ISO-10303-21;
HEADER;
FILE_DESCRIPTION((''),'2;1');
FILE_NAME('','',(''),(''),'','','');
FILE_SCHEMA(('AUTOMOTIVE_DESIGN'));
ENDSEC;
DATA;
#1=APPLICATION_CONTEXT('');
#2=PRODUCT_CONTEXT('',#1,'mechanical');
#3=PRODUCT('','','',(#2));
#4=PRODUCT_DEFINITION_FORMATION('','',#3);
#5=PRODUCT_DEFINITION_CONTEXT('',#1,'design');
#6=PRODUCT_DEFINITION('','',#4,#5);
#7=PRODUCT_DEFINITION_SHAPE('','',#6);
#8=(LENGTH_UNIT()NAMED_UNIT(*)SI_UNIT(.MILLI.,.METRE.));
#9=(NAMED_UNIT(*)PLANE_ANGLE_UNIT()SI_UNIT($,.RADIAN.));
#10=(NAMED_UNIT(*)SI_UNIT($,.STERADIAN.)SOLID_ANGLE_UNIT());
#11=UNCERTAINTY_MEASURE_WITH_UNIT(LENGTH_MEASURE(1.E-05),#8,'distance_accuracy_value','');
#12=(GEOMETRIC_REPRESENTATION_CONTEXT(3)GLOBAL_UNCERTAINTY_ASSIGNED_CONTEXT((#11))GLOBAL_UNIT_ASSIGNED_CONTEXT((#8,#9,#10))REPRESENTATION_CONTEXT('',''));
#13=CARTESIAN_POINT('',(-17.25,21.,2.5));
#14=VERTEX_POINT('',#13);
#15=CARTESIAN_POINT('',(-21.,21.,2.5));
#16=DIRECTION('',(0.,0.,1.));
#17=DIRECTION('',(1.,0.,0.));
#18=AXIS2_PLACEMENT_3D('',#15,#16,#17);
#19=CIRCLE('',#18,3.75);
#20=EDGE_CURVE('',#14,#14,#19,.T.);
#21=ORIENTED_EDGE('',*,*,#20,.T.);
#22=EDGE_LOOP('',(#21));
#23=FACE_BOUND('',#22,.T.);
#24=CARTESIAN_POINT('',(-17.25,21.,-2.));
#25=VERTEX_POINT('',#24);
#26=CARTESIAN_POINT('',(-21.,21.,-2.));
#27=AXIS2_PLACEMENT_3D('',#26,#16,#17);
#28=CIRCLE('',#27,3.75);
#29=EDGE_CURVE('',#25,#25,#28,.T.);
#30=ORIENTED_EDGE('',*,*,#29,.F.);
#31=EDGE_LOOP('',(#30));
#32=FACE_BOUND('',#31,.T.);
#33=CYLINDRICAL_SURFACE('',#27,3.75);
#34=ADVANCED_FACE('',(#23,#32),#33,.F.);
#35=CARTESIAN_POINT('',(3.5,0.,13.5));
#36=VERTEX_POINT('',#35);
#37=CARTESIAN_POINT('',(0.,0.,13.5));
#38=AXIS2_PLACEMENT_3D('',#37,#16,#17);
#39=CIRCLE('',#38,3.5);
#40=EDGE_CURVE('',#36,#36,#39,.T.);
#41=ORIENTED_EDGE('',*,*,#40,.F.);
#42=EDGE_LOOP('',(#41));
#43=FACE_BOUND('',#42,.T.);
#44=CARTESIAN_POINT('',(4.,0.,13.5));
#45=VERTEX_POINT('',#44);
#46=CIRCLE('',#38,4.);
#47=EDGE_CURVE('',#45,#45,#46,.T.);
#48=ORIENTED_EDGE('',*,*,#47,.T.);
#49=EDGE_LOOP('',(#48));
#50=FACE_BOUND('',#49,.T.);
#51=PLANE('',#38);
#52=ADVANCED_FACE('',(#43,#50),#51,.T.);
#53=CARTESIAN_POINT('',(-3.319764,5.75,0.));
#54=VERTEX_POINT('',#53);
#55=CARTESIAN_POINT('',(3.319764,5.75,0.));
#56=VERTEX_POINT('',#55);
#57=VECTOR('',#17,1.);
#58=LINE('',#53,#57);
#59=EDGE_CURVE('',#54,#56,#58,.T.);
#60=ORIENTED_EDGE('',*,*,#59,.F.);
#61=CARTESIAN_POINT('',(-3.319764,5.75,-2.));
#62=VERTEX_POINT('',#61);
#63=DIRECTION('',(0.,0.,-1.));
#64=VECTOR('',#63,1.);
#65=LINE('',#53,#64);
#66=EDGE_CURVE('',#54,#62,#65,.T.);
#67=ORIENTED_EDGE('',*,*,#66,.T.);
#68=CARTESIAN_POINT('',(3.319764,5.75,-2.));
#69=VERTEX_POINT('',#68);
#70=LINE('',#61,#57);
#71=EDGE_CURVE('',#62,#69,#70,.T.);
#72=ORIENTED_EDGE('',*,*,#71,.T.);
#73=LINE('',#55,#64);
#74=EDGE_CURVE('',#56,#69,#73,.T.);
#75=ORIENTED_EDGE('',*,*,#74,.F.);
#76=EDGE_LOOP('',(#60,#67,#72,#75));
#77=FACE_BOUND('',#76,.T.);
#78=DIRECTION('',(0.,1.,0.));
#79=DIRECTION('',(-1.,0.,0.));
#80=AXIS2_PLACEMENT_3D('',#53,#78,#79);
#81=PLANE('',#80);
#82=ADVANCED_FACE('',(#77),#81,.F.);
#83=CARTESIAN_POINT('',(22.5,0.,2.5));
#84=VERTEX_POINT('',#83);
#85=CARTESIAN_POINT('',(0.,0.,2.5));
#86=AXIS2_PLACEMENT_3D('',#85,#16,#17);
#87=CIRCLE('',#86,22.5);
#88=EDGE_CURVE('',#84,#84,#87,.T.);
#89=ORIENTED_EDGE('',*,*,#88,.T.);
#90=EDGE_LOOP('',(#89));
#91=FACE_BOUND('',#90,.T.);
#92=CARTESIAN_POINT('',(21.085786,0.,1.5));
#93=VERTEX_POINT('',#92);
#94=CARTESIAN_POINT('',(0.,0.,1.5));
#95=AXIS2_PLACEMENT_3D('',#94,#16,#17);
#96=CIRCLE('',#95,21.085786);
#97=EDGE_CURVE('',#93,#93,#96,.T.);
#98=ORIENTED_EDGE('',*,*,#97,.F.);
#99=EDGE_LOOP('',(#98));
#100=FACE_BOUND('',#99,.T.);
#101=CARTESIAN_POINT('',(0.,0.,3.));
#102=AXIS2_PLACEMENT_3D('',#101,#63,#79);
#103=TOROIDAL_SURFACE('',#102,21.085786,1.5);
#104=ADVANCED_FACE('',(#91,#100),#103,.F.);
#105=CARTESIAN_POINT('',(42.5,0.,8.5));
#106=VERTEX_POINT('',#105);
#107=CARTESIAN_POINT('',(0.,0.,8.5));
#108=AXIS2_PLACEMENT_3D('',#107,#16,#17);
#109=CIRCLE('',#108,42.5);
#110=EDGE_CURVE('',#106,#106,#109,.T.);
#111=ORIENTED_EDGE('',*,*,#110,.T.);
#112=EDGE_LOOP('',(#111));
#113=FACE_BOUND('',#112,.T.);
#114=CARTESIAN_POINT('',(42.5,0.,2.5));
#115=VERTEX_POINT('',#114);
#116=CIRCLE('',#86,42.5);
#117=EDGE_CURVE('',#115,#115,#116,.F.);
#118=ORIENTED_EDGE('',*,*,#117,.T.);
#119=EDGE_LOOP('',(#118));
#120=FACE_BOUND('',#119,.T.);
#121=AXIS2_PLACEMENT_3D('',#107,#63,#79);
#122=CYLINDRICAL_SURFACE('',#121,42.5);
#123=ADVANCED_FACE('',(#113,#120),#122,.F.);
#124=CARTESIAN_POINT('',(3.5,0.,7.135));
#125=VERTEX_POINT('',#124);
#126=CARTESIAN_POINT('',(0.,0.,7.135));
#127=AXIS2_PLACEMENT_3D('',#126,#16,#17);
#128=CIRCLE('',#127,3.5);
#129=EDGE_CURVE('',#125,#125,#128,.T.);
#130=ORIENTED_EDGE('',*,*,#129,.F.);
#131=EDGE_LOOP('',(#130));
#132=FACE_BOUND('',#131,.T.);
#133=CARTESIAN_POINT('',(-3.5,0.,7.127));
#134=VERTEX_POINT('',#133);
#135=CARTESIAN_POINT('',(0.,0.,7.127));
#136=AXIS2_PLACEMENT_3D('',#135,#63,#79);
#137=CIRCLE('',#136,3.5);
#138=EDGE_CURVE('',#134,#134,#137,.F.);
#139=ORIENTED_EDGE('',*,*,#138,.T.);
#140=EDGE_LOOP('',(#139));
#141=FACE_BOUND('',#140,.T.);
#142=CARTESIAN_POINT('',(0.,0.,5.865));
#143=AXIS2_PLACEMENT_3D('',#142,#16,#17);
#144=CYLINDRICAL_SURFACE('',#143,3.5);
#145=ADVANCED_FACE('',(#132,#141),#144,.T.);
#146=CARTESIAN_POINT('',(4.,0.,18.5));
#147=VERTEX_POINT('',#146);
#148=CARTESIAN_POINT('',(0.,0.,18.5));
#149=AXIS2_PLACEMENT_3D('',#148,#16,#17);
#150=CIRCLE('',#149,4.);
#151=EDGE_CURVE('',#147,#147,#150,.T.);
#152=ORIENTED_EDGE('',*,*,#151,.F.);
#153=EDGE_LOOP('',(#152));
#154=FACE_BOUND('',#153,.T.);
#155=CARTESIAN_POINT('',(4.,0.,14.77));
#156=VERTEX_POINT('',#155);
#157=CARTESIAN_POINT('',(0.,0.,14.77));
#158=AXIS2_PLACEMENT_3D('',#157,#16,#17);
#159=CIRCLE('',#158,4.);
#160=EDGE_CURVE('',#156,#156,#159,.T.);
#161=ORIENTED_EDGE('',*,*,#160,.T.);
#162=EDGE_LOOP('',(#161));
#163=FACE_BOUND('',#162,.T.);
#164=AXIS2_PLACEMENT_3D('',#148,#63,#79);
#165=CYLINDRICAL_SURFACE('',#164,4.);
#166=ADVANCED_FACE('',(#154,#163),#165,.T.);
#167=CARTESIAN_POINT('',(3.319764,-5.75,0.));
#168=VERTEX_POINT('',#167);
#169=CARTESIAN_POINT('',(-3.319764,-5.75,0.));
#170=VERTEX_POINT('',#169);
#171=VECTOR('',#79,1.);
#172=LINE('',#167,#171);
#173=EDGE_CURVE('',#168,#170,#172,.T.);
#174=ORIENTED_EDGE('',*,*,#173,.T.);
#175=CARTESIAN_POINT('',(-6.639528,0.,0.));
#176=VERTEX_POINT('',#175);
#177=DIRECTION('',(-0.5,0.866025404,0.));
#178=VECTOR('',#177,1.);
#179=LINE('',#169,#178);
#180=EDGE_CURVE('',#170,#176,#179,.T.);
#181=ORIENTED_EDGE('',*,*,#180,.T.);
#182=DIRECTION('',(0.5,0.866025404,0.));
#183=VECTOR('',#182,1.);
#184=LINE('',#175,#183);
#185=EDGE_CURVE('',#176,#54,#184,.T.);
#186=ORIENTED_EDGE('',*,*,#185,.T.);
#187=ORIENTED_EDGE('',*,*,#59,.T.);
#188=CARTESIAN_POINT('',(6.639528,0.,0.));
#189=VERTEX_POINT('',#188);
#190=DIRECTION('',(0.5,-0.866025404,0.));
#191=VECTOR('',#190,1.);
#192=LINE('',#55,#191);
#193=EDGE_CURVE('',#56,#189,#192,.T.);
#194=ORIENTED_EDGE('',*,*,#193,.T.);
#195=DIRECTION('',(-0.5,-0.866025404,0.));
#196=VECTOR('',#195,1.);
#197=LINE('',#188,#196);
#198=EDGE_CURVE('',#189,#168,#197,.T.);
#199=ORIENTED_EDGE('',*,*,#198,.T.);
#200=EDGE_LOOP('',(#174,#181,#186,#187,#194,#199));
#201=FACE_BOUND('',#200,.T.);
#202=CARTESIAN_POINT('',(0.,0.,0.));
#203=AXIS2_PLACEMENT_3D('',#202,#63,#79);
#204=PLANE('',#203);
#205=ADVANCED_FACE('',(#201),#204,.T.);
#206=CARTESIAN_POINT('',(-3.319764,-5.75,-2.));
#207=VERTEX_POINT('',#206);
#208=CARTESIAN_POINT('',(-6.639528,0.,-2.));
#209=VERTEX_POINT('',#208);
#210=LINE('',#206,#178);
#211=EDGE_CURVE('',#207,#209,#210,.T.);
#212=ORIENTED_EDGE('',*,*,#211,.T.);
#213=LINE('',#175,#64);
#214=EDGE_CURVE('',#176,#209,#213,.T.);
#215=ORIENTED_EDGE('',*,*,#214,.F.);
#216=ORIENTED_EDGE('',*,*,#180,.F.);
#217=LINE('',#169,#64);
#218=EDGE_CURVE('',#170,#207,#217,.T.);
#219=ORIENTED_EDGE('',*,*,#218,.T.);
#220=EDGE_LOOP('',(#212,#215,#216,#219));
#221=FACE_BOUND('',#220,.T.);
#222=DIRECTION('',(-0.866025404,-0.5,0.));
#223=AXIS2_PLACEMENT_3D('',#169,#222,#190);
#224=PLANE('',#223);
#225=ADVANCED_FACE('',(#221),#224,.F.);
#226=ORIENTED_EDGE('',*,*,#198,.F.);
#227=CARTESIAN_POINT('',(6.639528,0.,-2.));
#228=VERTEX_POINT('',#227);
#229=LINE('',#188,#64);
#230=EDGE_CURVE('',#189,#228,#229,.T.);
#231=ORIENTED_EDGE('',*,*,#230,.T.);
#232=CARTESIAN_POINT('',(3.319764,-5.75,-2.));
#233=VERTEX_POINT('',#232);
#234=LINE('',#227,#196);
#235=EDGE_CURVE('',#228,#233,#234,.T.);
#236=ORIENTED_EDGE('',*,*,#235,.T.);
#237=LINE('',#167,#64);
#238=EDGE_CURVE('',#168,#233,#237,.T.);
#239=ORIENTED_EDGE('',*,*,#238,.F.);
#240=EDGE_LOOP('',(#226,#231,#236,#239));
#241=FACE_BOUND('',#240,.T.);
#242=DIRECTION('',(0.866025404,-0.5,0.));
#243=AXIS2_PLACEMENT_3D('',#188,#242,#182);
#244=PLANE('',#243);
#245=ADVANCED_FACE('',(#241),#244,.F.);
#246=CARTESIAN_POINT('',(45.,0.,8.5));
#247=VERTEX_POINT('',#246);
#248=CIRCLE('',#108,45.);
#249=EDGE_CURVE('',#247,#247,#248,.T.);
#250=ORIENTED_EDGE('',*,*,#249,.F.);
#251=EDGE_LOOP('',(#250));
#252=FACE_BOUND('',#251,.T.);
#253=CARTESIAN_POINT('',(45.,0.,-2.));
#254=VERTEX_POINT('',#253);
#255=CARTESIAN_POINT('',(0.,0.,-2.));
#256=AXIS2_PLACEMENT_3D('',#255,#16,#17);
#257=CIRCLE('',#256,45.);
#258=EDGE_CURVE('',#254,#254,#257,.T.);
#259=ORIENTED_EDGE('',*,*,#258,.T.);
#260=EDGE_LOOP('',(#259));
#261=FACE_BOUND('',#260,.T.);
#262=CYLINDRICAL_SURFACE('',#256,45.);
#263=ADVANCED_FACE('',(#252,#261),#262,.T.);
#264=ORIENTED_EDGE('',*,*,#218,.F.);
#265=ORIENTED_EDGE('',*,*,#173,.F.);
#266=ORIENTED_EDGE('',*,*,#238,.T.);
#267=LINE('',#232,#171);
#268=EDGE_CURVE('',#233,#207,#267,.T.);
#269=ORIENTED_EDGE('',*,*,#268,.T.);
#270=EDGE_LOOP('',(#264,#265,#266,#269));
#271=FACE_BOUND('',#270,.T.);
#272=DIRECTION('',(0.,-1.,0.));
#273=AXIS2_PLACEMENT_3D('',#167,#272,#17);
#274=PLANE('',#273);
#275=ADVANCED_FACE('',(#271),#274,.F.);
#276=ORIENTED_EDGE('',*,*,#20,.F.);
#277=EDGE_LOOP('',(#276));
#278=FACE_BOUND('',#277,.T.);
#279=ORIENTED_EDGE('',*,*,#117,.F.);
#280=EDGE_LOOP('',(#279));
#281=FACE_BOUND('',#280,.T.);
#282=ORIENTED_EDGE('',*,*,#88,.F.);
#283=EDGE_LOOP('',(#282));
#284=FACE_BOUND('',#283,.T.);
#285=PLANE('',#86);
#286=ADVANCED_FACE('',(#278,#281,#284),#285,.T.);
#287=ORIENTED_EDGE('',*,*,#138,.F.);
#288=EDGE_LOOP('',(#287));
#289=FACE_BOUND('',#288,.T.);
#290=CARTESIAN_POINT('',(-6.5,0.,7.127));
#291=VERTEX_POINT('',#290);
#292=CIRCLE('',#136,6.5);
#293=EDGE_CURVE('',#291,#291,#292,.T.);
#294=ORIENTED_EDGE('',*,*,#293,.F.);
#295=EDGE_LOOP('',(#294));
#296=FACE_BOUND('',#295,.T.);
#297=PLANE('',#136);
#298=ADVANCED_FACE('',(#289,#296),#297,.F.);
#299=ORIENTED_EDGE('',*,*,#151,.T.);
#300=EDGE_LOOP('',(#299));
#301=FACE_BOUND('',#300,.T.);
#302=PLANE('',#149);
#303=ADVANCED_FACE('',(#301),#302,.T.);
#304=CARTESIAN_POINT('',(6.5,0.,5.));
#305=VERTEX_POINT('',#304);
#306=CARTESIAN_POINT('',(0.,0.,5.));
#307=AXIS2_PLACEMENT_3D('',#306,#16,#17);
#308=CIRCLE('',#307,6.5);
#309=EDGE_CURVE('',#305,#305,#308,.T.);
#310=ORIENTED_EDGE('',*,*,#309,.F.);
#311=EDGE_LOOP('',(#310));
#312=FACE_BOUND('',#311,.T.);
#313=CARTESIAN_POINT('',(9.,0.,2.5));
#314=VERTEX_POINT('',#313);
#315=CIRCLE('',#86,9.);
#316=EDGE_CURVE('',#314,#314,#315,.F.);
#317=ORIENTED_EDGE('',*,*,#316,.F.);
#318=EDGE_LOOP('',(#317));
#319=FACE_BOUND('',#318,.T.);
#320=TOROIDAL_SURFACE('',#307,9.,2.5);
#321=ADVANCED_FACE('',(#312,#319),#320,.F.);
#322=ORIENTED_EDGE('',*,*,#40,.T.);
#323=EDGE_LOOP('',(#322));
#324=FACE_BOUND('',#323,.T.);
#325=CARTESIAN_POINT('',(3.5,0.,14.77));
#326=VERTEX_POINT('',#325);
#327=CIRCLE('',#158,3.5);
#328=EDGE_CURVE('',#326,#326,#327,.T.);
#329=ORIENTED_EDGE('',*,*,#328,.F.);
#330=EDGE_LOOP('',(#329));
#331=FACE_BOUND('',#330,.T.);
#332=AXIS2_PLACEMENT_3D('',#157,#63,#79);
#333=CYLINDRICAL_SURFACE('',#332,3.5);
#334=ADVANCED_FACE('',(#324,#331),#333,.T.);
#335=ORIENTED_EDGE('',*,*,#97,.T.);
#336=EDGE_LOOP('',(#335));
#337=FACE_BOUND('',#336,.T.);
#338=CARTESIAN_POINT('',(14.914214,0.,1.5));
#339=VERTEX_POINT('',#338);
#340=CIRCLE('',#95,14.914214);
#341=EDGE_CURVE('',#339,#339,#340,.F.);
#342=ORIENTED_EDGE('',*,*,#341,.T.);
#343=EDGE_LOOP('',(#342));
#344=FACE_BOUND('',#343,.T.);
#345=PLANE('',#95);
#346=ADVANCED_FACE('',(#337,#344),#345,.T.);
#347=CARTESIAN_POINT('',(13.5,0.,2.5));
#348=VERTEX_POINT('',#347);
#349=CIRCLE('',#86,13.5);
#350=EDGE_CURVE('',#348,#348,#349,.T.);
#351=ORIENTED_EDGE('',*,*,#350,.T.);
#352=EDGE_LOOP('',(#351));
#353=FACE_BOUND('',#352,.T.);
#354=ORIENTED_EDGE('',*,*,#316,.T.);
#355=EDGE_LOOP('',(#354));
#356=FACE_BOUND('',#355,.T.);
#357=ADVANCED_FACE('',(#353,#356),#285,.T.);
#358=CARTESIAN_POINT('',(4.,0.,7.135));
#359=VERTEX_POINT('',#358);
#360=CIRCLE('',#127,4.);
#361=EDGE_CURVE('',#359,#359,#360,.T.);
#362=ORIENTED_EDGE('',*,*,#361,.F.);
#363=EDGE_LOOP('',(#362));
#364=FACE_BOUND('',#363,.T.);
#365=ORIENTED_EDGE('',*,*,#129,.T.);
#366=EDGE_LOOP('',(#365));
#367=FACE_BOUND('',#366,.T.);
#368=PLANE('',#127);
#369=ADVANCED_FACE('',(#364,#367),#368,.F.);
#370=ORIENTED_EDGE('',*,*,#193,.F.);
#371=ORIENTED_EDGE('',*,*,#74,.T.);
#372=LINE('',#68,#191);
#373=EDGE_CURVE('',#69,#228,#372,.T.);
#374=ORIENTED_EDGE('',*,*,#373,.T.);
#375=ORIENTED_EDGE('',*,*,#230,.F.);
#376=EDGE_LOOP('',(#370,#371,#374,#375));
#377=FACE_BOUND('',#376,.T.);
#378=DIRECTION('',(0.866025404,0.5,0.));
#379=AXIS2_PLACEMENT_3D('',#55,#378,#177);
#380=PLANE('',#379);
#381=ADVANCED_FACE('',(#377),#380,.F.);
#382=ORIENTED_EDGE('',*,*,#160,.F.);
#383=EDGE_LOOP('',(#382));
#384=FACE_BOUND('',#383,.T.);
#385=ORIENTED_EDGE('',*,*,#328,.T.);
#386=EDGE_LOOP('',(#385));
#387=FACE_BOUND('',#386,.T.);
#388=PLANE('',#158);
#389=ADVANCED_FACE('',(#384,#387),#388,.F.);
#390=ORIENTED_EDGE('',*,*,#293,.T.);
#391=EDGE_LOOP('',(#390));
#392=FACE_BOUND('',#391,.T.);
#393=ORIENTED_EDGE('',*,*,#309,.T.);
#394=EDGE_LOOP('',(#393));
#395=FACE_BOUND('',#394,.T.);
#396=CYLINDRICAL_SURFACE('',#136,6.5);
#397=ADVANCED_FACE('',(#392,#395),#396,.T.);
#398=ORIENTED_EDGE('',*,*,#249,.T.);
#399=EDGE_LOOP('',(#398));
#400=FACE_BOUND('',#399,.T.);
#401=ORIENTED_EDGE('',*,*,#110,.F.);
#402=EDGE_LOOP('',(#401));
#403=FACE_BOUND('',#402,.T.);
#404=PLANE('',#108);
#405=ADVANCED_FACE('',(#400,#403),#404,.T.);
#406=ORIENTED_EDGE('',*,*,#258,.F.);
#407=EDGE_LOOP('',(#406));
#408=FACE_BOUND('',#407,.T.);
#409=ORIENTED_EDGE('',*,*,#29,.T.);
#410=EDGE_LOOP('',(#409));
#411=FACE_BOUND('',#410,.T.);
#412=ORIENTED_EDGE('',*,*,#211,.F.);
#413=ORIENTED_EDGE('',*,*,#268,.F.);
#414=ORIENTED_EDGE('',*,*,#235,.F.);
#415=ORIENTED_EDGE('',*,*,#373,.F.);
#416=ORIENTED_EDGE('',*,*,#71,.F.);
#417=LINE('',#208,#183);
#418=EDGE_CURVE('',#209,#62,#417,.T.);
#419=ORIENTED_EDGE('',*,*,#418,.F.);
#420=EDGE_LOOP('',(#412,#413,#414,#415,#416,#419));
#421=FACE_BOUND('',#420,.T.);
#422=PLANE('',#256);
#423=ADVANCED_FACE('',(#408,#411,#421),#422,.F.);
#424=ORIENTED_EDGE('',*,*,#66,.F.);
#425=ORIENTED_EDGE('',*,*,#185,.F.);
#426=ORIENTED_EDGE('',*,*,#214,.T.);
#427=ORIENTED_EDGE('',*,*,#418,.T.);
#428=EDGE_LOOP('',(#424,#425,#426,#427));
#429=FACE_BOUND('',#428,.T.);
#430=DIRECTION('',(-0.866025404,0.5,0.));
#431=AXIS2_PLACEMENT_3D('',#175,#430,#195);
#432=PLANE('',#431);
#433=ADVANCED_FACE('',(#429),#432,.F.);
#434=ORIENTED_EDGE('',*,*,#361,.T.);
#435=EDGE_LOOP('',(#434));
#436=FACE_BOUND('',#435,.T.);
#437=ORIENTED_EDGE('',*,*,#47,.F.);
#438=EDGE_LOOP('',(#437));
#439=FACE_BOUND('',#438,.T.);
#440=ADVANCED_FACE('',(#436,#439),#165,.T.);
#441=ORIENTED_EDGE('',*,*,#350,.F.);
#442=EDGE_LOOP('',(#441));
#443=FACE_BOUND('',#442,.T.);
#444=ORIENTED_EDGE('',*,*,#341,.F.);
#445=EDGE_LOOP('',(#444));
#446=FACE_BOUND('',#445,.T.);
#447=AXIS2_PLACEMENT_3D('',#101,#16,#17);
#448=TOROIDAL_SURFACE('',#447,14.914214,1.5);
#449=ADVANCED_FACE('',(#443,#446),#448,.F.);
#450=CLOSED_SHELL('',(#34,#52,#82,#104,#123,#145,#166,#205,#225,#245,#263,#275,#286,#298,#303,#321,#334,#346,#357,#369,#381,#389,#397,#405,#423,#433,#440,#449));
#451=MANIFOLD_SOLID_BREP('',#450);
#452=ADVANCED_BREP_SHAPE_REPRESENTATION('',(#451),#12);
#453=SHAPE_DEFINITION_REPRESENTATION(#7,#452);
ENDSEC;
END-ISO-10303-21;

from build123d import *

# Parameters (mm, degrees)
BOSS_EXTRUDE1_DEPTH      = 2.5
BOSS_EXTRUDE1_DEPTH_BACK = 2
SKETCH1_R                = 45
SKETCH2_R                = 45
SKETCH2_R_2              = 42.5
BOSS_EXTRUDE2_DEPTH      = 6
SKETCH3_R                = 4
BOSS_EXTRUDE3_DEPTH      = 16
SKETCH4_R                = 4
SKETCH4_R_2              = 3.5
CUT_EXTRUDE1_DEPTH       = 1.27
CUT_EXTRUDE2_START       = -1.27
SKETCH5_R                = 4
SKETCH5_R_2              = 3.5
CUT_EXTRUDE2_DEPTH       = 1.27
CUT_EXTRUDE3_DEPTH       = 2
SKETCH7_R                = 3.75
CUT_EXTRUDE4_DEPTH       = 66.620118866
SKETCH8_R                = 22.5
SKETCH8_R_2              = 13.5
CUT_EXTRUDE5_DEPTH       = 1
FILLET2_R                = 1.5
SKETCH11_R               = 6.5
BOSS_EXTRUDE4_DEPTH      = 7.127
FILLET3_R                = 2.5


with BuildPart() as part:
    # Sketch1 → Boss-Extrude1 (new, two sides: drawn at the far end of the back side and taken through both)
    with BuildSketch(Plane.XY.offset(-BOSS_EXTRUDE1_DEPTH_BACK)):
        Circle(SKETCH1_R)
    extrude(amount=BOSS_EXTRUDE1_DEPTH + BOSS_EXTRUDE1_DEPTH_BACK)

    # Sketch2 → Boss-Extrude2 (add)
    with BuildSketch(Plane.XY.offset(2.5)):
        Circle(SKETCH2_R)
        Circle(SKETCH2_R_2, mode=Mode.SUBTRACT)
    extrude(amount=BOSS_EXTRUDE2_DEPTH)

    # Sketch3 → Boss-Extrude3 (add)
    with BuildSketch(Plane.XY.offset(2.5)):
        Circle(SKETCH3_R)
    extrude(amount=BOSS_EXTRUDE3_DEPTH)

    # Sketch4 → Cut-Extrude1 (cut)
    with BuildSketch(Plane.XY.offset(13.5)):
        Circle(SKETCH4_R)
        Circle(SKETCH4_R_2, mode=Mode.SUBTRACT)
    extrude(amount=CUT_EXTRUDE1_DEPTH, mode=Mode.SUBTRACT)

    # Sketch5 → Cut-Extrude2 (cut)
    with BuildSketch(Plane.XY.offset(7.135).offset(CUT_EXTRUDE2_START)):
        Circle(SKETCH5_R)
        Circle(SKETCH5_R_2, mode=Mode.SUBTRACT)
    extrude(amount=CUT_EXTRUDE2_DEPTH, mode=Mode.SUBTRACT)

    # Sketch6 → Cut-Extrude3 (cut)
    with BuildSketch(Plane(origin=(0, 0, -2), x_dir=(-1, 0, 0), z_dir=(0, 0, -1))):
        Polygon((-6.639528096, 0), (-3.319764048, -5.75), (3.319764048, -5.75), (6.639528096, 0), (3.319764048, 5.75), (-3.319764048, 5.75), align=None)
    extrude(amount=-CUT_EXTRUDE3_DEPTH, mode=Mode.SUBTRACT)

    # Sketch7 → Cut-Extrude4 (cut, through all)
    with BuildSketch(Plane.XY.offset(2.5)):
        with Locations((-21, 21)):
            Circle(SKETCH7_R)
    extrude(amount=-CUT_EXTRUDE4_DEPTH, mode=Mode.SUBTRACT)

    # Sketch8 → Cut-Extrude5 (cut)
    with BuildSketch(Plane.XY.offset(2.5)):
        Circle(SKETCH8_R)
        Circle(SKETCH8_R_2, mode=Mode.SUBTRACT)
    extrude(amount=-CUT_EXTRUDE5_DEPTH, mode=Mode.SUBTRACT)

    # Fillet2
    # the kernel refuses this fillet: 1.5 mm, written as the material it adds along each edge
    with BuildSketch(Plane(origin=(0, 0, 1.5), x_dir=(1, 0, 0), z_dir=(0, -1, 0))) as fillet2_piece_1:
        with BuildLine():
            CenterArc((21.085786438, 1.5), FILLET2_R, 270, 70.528779366)
            Line((21.085786438, 0), (21.085786438, -0.03))
            Line((21.085786438, -0.03), (22.5, -0.03))
            Line((22.5, -0.03), (22.53, 0))
            ThreePointArc((22.53, 0), (22.53, 0.5), (22.528284271, 0.99))
            Line((22.528284271, 0.99), (22.5, 1))
        make_face()
    revolve(axis=Axis((0, 0, 1.5), (0, 0, 1)))
    with BuildSketch(Plane(origin=(0, 0, 1.5), x_dir=(1, 0, 0), z_dir=(0, -1, 0))) as fillet2_piece_2:
        with BuildLine():
            CenterArc((14.914213562, 1.5), FILLET2_R, 199.471220634, 70.528779366)
            Line((13.5, 1), (13.471715729, 0.99))
            ThreePointArc((13.471715729, 0.99), (13.47, 0.5), (13.47, 0))
            Line((13.47, 0), (13.5, -0.03))
            Line((13.5, -0.03), (14.914213562, -0.03))
            Line((14.914213562, -0.03), (14.914213562, 0))
        make_face()
    revolve(axis=Axis((0, 0, 1.5), (0, 0, 1)))

    # Sketch11 → Boss-Extrude4 (add)
    with BuildSketch(Plane(origin=(0, 0, 0), x_dir=(-1, 0, 0), z_dir=(0, 0, -1))):
        Circle(SKETCH11_R)
    extrude(amount=-BOSS_EXTRUDE4_DEPTH)

    # Fillet3
    fillet3_edges = [part.edges().sort_by_distance(p)[0] for p in [
        (6.5, 0, 2.5),
    ]]
    fillet(fillet3_edges, radius=FILLET3_R)


solid = part.part
